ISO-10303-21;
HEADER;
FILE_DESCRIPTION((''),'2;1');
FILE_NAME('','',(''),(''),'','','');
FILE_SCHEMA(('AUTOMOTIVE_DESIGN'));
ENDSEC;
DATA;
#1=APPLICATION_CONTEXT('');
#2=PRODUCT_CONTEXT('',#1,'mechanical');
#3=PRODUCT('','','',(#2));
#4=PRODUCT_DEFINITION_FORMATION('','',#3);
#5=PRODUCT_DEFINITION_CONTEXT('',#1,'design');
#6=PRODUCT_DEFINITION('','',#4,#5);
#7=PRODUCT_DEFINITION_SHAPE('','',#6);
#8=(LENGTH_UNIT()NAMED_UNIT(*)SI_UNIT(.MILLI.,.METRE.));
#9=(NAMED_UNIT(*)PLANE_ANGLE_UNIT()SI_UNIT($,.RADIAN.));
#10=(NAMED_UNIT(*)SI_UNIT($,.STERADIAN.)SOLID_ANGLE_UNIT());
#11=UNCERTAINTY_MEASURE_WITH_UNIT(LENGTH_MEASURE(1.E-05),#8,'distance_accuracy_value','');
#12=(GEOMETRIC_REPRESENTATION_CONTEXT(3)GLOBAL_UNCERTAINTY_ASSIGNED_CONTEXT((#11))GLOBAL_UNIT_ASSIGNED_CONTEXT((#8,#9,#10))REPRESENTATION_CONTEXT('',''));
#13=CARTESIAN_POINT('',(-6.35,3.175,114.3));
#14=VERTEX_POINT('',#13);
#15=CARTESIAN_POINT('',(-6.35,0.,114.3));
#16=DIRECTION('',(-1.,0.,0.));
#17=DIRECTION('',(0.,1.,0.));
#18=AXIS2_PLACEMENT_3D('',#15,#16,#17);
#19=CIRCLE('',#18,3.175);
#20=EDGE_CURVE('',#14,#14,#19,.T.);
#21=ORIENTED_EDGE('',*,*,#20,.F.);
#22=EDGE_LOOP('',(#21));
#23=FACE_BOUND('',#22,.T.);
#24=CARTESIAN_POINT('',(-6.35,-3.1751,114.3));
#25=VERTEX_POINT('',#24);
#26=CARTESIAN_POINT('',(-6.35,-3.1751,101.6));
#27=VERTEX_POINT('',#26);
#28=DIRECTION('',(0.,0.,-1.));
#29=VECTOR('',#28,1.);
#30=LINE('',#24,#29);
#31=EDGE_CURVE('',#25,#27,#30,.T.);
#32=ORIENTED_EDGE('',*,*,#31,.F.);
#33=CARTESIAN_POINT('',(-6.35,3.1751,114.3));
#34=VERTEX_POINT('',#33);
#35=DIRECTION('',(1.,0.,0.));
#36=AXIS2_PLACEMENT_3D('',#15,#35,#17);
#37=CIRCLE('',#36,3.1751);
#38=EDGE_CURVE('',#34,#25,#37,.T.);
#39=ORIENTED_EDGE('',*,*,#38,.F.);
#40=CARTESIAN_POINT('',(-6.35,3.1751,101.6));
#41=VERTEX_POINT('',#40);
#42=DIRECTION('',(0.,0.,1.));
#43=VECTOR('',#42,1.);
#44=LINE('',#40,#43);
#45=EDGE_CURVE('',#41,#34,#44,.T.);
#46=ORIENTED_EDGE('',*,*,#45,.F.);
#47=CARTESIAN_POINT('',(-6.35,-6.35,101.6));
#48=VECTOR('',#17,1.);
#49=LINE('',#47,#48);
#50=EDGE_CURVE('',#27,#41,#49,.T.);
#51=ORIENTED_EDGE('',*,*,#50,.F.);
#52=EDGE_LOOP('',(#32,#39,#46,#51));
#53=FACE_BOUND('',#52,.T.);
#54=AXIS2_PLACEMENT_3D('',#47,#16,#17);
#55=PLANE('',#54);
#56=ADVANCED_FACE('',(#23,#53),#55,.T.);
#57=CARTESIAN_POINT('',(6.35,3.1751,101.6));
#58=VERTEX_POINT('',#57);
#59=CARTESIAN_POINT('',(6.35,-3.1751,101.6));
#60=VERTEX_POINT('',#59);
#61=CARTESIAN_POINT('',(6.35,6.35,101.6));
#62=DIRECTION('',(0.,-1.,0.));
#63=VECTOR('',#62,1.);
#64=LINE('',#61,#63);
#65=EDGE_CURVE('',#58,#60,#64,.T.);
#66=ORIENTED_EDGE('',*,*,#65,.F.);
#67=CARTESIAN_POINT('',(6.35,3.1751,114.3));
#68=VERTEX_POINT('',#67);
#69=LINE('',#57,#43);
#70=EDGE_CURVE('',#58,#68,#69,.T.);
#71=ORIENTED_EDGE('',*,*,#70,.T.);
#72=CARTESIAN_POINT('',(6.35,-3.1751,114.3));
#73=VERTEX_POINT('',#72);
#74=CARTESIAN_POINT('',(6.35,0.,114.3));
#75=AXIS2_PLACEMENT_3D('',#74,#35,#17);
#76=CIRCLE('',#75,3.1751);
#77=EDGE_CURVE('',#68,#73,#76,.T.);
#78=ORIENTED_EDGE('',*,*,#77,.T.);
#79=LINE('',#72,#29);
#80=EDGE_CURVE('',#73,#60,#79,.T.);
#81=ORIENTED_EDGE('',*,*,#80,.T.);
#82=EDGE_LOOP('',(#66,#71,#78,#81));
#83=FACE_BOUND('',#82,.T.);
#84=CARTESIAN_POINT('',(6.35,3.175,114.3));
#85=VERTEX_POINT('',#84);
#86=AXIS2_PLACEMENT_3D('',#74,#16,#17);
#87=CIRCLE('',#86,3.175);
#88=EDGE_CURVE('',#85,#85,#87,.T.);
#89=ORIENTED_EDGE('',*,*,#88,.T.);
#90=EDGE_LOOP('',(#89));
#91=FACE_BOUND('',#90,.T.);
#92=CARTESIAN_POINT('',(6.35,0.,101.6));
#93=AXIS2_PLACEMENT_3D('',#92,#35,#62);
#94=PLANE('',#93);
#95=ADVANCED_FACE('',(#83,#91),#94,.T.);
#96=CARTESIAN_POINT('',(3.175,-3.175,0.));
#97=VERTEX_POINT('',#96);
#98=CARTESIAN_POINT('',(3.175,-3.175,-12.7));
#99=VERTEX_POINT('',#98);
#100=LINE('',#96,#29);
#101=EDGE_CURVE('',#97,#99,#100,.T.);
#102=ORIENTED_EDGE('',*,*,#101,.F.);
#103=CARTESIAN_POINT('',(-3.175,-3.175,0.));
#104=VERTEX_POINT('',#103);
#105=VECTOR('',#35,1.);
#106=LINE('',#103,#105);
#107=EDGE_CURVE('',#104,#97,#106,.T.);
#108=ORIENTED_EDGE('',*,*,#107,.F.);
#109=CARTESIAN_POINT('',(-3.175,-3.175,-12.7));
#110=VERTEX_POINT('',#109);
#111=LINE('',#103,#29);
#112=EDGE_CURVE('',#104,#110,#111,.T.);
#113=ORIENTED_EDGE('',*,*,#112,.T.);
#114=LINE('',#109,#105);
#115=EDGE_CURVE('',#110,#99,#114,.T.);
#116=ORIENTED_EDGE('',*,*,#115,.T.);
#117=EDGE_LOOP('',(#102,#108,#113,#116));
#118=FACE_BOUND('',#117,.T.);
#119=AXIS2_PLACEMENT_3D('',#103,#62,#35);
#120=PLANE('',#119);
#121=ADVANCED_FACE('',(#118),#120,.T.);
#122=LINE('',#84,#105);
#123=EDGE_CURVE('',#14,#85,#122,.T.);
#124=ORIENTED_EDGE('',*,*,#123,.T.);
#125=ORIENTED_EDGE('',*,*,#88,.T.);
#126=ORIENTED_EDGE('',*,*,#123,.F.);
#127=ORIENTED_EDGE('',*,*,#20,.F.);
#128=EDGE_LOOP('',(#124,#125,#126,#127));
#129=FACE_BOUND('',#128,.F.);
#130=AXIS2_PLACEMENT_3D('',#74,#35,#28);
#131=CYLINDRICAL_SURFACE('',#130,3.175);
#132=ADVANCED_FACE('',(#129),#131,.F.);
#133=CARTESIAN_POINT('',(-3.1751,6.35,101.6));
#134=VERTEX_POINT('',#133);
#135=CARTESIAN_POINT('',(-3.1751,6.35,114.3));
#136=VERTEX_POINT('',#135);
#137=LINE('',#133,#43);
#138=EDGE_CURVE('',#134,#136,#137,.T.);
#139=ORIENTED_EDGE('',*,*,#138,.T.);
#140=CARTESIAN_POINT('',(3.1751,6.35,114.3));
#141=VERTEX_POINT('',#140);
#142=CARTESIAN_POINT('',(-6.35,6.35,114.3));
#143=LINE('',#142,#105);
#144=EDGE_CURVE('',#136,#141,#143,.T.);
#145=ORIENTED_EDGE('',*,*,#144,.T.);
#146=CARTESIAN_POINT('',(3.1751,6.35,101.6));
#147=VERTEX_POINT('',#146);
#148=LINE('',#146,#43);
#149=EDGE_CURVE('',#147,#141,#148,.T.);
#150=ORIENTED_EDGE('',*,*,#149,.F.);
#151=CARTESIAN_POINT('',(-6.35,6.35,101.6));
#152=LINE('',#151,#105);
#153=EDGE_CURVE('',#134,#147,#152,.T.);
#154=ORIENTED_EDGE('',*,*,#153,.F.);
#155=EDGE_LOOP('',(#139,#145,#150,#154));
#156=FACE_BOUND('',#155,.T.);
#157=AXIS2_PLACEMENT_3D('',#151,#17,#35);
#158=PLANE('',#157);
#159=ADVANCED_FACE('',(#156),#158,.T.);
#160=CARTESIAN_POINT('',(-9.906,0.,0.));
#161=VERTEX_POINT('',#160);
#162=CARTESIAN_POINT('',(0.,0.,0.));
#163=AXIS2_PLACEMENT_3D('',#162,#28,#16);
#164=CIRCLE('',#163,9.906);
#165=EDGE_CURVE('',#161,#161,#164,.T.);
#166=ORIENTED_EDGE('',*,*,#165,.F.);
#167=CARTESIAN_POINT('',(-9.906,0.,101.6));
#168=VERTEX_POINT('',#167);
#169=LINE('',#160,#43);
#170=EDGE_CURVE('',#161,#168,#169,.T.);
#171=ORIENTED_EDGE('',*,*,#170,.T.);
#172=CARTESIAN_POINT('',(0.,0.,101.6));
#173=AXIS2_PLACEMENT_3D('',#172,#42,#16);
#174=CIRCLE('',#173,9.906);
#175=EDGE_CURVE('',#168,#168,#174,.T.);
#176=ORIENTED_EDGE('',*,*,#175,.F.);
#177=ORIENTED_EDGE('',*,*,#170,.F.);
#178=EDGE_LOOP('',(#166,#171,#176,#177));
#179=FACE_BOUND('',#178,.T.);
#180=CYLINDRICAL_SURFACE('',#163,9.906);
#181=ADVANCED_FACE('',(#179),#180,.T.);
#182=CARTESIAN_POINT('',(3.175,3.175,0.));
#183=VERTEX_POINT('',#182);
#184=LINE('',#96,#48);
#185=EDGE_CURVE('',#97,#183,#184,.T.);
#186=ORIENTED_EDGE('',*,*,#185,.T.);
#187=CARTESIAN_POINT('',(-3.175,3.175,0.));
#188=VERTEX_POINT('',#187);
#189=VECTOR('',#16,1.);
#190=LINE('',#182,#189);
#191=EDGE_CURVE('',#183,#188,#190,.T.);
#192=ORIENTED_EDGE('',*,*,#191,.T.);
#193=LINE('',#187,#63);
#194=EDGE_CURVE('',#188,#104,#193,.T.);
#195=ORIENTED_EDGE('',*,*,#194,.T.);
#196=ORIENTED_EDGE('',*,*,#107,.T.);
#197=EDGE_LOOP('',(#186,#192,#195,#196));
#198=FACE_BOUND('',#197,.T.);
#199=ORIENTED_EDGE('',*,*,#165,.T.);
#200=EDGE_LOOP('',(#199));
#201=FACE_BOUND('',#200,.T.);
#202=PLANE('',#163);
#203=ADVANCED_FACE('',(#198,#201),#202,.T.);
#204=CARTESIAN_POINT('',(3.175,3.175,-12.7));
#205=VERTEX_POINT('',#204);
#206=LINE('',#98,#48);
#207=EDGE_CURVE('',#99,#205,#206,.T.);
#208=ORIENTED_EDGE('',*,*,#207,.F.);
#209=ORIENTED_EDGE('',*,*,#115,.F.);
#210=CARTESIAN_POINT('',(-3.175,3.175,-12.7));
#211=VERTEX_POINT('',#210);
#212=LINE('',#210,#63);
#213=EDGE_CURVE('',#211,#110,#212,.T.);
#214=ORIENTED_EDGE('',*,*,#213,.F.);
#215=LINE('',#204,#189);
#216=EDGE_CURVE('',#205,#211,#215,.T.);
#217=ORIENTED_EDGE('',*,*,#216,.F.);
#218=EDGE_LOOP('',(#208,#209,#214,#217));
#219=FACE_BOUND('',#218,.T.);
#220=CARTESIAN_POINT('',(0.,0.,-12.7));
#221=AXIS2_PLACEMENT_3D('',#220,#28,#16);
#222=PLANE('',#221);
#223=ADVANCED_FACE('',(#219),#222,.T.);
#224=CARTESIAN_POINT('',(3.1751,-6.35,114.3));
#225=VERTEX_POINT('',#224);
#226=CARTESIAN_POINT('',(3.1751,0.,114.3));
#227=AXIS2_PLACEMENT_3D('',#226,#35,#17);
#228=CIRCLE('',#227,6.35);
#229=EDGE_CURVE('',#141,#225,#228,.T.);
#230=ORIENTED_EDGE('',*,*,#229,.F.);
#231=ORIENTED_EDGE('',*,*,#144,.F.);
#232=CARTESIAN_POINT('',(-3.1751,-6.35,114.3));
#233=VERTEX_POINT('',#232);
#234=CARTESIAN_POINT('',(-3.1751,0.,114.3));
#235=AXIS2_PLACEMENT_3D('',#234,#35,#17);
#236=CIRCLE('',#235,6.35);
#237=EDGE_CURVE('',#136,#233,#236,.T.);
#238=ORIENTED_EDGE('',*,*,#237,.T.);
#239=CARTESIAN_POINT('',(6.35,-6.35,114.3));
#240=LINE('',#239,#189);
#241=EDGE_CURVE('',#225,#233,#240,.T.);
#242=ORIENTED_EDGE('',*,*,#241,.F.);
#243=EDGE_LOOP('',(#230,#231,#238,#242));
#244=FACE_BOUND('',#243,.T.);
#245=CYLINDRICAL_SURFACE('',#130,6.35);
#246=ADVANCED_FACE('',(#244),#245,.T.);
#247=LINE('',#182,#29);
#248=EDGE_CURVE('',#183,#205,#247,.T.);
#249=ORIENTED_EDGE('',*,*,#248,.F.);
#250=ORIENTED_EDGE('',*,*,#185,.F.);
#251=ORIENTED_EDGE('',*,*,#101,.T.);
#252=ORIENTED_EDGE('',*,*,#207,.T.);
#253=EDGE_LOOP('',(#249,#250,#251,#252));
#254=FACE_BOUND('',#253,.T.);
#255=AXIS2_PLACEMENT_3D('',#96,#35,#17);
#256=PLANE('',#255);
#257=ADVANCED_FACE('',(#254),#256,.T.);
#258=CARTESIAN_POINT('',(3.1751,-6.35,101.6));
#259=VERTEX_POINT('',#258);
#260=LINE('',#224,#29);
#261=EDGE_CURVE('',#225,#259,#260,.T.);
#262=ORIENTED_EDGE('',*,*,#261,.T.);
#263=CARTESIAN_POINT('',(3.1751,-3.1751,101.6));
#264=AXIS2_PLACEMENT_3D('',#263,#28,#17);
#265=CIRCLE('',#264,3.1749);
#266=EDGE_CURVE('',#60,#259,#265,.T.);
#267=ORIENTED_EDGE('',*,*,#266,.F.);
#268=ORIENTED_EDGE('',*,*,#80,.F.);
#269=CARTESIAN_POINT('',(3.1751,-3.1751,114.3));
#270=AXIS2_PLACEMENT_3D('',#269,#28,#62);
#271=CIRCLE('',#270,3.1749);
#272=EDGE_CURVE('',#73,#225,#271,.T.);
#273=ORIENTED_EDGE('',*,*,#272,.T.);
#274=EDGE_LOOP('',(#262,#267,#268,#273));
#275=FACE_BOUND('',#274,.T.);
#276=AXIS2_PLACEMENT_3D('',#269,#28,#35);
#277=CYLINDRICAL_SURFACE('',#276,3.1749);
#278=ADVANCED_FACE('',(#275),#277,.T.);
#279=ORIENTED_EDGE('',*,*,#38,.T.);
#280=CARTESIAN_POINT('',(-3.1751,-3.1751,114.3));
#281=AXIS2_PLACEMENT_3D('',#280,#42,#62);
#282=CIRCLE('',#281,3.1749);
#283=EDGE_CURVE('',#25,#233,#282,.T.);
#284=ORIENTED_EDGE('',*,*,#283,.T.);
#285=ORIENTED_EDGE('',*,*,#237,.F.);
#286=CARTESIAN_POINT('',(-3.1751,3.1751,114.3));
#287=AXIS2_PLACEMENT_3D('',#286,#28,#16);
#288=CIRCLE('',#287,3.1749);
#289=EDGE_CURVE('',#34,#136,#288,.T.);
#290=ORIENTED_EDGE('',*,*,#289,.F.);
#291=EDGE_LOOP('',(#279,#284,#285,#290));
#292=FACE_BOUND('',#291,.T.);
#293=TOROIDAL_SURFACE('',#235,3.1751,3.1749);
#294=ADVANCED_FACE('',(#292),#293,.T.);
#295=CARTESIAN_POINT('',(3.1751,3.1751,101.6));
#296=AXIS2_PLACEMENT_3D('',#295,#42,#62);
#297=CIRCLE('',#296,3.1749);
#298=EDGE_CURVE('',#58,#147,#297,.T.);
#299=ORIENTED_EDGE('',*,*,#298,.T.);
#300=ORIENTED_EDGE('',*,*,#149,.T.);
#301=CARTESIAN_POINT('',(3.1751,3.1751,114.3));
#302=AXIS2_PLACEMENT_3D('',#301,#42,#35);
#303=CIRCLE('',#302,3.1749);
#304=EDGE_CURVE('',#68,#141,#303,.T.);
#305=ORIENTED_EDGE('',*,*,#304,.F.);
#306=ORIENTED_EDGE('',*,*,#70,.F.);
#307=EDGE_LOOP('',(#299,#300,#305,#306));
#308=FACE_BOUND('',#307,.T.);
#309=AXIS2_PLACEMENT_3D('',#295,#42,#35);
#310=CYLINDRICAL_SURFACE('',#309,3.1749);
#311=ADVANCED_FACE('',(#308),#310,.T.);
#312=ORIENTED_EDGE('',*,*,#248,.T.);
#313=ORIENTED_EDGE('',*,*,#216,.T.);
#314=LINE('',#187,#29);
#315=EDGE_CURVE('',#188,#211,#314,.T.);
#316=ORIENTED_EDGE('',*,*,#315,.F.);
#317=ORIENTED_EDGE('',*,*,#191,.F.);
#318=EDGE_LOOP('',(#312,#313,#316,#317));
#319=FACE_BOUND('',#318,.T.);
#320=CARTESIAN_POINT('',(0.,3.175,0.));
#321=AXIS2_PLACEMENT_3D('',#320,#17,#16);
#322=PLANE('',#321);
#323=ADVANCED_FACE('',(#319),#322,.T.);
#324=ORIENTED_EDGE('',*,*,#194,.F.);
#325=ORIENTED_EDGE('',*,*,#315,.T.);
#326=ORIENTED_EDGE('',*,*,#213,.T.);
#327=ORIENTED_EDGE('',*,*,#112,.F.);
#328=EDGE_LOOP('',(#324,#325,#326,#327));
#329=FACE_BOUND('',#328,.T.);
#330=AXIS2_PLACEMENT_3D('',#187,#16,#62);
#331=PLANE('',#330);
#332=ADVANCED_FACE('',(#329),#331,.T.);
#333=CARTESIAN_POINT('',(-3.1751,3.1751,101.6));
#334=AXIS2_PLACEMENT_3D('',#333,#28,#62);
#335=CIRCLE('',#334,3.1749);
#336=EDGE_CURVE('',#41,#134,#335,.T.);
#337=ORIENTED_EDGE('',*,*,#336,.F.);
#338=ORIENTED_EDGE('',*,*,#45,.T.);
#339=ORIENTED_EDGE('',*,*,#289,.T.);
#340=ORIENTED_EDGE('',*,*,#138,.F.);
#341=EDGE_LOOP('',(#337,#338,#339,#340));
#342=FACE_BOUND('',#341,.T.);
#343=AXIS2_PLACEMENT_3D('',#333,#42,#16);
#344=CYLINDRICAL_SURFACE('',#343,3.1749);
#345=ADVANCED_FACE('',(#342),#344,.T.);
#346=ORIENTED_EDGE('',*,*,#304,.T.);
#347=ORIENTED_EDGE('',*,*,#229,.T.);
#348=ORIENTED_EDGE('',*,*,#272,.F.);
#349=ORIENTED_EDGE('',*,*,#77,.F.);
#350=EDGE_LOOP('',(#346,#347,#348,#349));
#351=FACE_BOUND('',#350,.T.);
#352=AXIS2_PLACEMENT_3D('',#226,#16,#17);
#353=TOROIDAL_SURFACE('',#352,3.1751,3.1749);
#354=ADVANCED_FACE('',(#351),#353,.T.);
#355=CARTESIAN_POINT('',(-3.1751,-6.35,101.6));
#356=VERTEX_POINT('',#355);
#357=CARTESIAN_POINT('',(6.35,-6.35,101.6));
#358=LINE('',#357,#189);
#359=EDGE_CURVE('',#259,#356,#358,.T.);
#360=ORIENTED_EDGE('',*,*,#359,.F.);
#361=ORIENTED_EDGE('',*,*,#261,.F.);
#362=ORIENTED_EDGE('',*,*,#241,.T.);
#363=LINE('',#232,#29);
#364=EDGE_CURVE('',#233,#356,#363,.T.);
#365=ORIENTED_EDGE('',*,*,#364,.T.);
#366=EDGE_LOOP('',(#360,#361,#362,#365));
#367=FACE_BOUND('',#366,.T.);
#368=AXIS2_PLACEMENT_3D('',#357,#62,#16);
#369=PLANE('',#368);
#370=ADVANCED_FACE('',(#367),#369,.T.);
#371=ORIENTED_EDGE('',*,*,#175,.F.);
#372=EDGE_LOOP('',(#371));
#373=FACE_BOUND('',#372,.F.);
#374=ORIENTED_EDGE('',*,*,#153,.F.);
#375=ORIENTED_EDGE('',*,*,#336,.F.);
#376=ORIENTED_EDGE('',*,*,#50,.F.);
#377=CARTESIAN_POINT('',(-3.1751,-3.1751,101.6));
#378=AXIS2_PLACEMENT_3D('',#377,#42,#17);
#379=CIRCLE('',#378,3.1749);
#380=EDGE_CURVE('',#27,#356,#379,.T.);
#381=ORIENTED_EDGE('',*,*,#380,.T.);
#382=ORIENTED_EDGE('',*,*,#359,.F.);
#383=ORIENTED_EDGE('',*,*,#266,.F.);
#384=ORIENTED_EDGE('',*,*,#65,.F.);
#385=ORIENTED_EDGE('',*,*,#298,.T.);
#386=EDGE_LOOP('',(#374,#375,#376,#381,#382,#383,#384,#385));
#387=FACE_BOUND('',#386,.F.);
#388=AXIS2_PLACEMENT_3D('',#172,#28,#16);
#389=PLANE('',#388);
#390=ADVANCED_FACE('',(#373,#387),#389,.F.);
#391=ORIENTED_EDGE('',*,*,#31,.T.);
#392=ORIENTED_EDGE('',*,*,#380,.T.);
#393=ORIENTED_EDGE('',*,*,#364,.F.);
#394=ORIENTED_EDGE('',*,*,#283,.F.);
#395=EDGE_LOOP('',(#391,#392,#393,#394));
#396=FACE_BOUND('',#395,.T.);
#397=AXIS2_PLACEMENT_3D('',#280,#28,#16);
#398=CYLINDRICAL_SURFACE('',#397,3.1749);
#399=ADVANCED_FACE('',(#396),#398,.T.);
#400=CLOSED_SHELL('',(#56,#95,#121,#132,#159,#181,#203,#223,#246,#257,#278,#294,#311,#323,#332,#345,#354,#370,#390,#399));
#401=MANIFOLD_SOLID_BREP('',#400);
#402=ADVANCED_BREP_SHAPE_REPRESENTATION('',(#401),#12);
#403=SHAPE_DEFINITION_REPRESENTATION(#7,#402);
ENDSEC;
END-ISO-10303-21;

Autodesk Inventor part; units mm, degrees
ref_plane "YZ Plane" through (0, 0, 0) normal (1, 0, 0) x (0, 1, 0)
ref_plane "XZ Plane" through (0, 0, 0) normal (0, 1, 0) x (-1, 0, 0)
ref_plane "XY Plane" through (0, 0, 0) normal (0, 0, 1) x (1, 0, 0)
sketch "Sketch1" plane through (0, 0, 0) normal (0, 0, 1) x (1, 0, 0)
  circle A0 centre (0, 0) radius 6.0688
extrude "Extrusion1" add sketch "Sketch1" along normal blind 101.6
sketch "Sketch2" plane through (0, 0, 101.6) normal (0, 0, 1) x (1, 0, 0)
  line L0 (-6.0688, 6.0688) -> (6.0688, 6.0688)
  line L1 (6.0688, 6.0688) -> (6.0688, -6.0688)
  line L2 (6.0688, -6.0688) -> (-6.0688, -6.0688)
  line L3 (-6.0688, -6.0688) -> (-6.0688, 6.0688)
extrude "Extrusion2" add sketch "Sketch2" along normal blind 12.7
sketch "Sketch3" plane through (6.0688, -6.0688, 101.6) normal (1, 0, 0) x (0, 0, -1)
  line L0 (-12.7, 12.1376) -> (-12.7, 0) projected
  circle A0 centre (-12.7, 6.0688) radius 3.175
  point P0 (101.6, 6.0688)
  dimension "d4" = 6.35
extrude "Extrusion3" cut sketch "Sketch3" against normal blind 12.7
sketch "Sketch4" plane through (6.0688, -6.0688, 101.6) normal (1, 0, 0) x (0, 0, -1)
  arc A0 (-12.7, 2.8938) -> (-12.7, 9.2438) centre (-12.7, 6.0688) ccw projected
  circle A1 centre (-12.7, 6.0688) radius 3.175
  circle A2 centre (-12.7, 6.0688) radius 6.0688
  point P0 (101.6, 6.0688)
extrude "Extrusion4" add sketch "Sketch4" against normal blind 12.7
sketch "Sketch5" plane through (-6.0688, 0, 101.6) normal (-1, 0, 0) x (0, 0, 1)
  arc A0 (12.7, 6.0688) -> (12.7, -6.0688) centre (12.7, 0) ccw projected
  line L0 (0, 6.0688) -> (12.7, 6.0688) projected
  line L1 (0, 0) -> (0, 6.0688) projected
  line L2 (0, -6.0688) -> (0, 0) projected
  line L3 (0, -6.0688) -> (12.7, -6.0688) projected
  line L4 (0, 6.0688) -> (38.3978, 6.0688)
  line L5 (38.3978, 6.0688) -> (38.3978, -6.0688)
  line L6 (38.3978, -6.0688) -> (0, -6.0688)
  line L7 (0, -6.0688) -> (0, 6.0688)
  point P0 (-101.6, 0)
extrude "Extrusion5" cut sketch "Sketch5" along normal blind 12.7 contours L4 L5 L6 A0
sketch "Sketch6" plane through (0, 0, 0) normal (0, 0, -1) x (-1, 0, 0)
  circle A0 centre (0, 0) radius 6.0688 projected
  line L0 (0, 0) -> (0, 3.175)
  line L1 (0, 3.175) -> (-3.175, 3.175)
  line L2 (-3.175, 3.175) -> (3.175, 3.175)
  line L3 (3.175, 3.175) -> (3.175, -3.175)
  line L4 (3.175, -3.175) -> (-3.175, -3.175)
  line L5 (-3.175, -3.175) -> (-3.175, 3.175)
  dimension "d11" = 3.175
  dimension "d12" = 3.175
  dimension "d13" = 6.35
  dimension "d14" = 6.35
extrude "Extrusion6" add sketch "Sketch6" along normal blind 12.7 contours L2 L3 L4 L5 L1
fillet "Fillet1" radius 3.175 6 edges at (6.0688, 6.0688, 107.95) (6.0688, 0, 120.3688) (6.0688, -6.0688, 107.95) (-6.0688, 6.0688, 107.95) (-6.0688, 0, 120.3688) (-6.0688, -6.0688, 107.95)
sketch "Sketch7" plane through (0, 0, 0) normal (0, 0, -1) x (-1, 0, 0)
  circle A0 centre (0, 0) radius 6.0688 projected
  circle A1 centre (0, 0) radius 9.906
  dimension "d18" = 19.812
extrude "Extrusion7" add sketch "Sketch7" against normal blind 101.6
sketch "Sketch8" plane through (0, 0, 101.6) normal (0, 0, 1) x (1, 0, 0)
  circle A0 centre (0, 0) radius 9.906 projected
extrude "Extrusion8" cut sketch "Sketch8" along normal blind 101.6
sketch "Sketch9" plane through (0, 0, 101.6) normal (0, 0, 1) x (1, 0, 0)
  circle A0 centre (0, 0) radius 9.906 projected
  circle A1 centre (0, 0) radius 6.35
  line L0 (-6.35, 6.35) -> (6.35, 6.35)
  line L1 (6.35, 6.35) -> (6.35, -6.35)
  line L2 (6.35, -6.35) -> (-6.35, -6.35)
  line L3 (-6.35, -6.35) -> (-6.35, 6.35)
  dimension "d23" = 12.7
extrude "Extrusion9" add sketch "Sketch9" along normal blind 12.7 contours A1 | L1 L2 A1 | A1 L0 L1 | A1 L3 L0 | L2 L3 A1
sketch "Sketch10" plane through (6.35, -6.35, 101.6) normal (1, 0, 0) x (0, 0, -1)
  line L0 (-12.7, 12.7) -> (-12.7, 0) projected
  circle A0 centre (-12.7, 6.35) radius 3.175
  point P0 (101.6, 6.35)
  dimension "d26" = 6.35
extrude "Extrusion10" cut sketch "Sketch10" against normal blind 12.7
sketch "Sketch11" plane through (6.35, -6.35, 101.6) normal (1, 0, 0) x (0, 0, -1)
  arc A0 (-12.7, 3.175) -> (-12.7, 9.525) centre (-12.7, 6.35) ccw projected
  circle A1 centre (-12.7, 6.35) radius 3.175
  circle A2 centre (-12.7, 6.35) radius 6.35
  point P0 (101.6, 6.35)
extrude "Extrusion11" add sketch "Sketch11" against normal blind 12.7
fillet "Fillet2" radius 3.175 6 edges at (6.35, 6.35, 107.95) (6.35, 0, 120.65) (6.35, -6.35, 107.95) (-6.35, 6.35, 107.95) (-6.35, 0, 120.65) (-6.35, -6.35, 107.95)
properties part number "linac arm1"
